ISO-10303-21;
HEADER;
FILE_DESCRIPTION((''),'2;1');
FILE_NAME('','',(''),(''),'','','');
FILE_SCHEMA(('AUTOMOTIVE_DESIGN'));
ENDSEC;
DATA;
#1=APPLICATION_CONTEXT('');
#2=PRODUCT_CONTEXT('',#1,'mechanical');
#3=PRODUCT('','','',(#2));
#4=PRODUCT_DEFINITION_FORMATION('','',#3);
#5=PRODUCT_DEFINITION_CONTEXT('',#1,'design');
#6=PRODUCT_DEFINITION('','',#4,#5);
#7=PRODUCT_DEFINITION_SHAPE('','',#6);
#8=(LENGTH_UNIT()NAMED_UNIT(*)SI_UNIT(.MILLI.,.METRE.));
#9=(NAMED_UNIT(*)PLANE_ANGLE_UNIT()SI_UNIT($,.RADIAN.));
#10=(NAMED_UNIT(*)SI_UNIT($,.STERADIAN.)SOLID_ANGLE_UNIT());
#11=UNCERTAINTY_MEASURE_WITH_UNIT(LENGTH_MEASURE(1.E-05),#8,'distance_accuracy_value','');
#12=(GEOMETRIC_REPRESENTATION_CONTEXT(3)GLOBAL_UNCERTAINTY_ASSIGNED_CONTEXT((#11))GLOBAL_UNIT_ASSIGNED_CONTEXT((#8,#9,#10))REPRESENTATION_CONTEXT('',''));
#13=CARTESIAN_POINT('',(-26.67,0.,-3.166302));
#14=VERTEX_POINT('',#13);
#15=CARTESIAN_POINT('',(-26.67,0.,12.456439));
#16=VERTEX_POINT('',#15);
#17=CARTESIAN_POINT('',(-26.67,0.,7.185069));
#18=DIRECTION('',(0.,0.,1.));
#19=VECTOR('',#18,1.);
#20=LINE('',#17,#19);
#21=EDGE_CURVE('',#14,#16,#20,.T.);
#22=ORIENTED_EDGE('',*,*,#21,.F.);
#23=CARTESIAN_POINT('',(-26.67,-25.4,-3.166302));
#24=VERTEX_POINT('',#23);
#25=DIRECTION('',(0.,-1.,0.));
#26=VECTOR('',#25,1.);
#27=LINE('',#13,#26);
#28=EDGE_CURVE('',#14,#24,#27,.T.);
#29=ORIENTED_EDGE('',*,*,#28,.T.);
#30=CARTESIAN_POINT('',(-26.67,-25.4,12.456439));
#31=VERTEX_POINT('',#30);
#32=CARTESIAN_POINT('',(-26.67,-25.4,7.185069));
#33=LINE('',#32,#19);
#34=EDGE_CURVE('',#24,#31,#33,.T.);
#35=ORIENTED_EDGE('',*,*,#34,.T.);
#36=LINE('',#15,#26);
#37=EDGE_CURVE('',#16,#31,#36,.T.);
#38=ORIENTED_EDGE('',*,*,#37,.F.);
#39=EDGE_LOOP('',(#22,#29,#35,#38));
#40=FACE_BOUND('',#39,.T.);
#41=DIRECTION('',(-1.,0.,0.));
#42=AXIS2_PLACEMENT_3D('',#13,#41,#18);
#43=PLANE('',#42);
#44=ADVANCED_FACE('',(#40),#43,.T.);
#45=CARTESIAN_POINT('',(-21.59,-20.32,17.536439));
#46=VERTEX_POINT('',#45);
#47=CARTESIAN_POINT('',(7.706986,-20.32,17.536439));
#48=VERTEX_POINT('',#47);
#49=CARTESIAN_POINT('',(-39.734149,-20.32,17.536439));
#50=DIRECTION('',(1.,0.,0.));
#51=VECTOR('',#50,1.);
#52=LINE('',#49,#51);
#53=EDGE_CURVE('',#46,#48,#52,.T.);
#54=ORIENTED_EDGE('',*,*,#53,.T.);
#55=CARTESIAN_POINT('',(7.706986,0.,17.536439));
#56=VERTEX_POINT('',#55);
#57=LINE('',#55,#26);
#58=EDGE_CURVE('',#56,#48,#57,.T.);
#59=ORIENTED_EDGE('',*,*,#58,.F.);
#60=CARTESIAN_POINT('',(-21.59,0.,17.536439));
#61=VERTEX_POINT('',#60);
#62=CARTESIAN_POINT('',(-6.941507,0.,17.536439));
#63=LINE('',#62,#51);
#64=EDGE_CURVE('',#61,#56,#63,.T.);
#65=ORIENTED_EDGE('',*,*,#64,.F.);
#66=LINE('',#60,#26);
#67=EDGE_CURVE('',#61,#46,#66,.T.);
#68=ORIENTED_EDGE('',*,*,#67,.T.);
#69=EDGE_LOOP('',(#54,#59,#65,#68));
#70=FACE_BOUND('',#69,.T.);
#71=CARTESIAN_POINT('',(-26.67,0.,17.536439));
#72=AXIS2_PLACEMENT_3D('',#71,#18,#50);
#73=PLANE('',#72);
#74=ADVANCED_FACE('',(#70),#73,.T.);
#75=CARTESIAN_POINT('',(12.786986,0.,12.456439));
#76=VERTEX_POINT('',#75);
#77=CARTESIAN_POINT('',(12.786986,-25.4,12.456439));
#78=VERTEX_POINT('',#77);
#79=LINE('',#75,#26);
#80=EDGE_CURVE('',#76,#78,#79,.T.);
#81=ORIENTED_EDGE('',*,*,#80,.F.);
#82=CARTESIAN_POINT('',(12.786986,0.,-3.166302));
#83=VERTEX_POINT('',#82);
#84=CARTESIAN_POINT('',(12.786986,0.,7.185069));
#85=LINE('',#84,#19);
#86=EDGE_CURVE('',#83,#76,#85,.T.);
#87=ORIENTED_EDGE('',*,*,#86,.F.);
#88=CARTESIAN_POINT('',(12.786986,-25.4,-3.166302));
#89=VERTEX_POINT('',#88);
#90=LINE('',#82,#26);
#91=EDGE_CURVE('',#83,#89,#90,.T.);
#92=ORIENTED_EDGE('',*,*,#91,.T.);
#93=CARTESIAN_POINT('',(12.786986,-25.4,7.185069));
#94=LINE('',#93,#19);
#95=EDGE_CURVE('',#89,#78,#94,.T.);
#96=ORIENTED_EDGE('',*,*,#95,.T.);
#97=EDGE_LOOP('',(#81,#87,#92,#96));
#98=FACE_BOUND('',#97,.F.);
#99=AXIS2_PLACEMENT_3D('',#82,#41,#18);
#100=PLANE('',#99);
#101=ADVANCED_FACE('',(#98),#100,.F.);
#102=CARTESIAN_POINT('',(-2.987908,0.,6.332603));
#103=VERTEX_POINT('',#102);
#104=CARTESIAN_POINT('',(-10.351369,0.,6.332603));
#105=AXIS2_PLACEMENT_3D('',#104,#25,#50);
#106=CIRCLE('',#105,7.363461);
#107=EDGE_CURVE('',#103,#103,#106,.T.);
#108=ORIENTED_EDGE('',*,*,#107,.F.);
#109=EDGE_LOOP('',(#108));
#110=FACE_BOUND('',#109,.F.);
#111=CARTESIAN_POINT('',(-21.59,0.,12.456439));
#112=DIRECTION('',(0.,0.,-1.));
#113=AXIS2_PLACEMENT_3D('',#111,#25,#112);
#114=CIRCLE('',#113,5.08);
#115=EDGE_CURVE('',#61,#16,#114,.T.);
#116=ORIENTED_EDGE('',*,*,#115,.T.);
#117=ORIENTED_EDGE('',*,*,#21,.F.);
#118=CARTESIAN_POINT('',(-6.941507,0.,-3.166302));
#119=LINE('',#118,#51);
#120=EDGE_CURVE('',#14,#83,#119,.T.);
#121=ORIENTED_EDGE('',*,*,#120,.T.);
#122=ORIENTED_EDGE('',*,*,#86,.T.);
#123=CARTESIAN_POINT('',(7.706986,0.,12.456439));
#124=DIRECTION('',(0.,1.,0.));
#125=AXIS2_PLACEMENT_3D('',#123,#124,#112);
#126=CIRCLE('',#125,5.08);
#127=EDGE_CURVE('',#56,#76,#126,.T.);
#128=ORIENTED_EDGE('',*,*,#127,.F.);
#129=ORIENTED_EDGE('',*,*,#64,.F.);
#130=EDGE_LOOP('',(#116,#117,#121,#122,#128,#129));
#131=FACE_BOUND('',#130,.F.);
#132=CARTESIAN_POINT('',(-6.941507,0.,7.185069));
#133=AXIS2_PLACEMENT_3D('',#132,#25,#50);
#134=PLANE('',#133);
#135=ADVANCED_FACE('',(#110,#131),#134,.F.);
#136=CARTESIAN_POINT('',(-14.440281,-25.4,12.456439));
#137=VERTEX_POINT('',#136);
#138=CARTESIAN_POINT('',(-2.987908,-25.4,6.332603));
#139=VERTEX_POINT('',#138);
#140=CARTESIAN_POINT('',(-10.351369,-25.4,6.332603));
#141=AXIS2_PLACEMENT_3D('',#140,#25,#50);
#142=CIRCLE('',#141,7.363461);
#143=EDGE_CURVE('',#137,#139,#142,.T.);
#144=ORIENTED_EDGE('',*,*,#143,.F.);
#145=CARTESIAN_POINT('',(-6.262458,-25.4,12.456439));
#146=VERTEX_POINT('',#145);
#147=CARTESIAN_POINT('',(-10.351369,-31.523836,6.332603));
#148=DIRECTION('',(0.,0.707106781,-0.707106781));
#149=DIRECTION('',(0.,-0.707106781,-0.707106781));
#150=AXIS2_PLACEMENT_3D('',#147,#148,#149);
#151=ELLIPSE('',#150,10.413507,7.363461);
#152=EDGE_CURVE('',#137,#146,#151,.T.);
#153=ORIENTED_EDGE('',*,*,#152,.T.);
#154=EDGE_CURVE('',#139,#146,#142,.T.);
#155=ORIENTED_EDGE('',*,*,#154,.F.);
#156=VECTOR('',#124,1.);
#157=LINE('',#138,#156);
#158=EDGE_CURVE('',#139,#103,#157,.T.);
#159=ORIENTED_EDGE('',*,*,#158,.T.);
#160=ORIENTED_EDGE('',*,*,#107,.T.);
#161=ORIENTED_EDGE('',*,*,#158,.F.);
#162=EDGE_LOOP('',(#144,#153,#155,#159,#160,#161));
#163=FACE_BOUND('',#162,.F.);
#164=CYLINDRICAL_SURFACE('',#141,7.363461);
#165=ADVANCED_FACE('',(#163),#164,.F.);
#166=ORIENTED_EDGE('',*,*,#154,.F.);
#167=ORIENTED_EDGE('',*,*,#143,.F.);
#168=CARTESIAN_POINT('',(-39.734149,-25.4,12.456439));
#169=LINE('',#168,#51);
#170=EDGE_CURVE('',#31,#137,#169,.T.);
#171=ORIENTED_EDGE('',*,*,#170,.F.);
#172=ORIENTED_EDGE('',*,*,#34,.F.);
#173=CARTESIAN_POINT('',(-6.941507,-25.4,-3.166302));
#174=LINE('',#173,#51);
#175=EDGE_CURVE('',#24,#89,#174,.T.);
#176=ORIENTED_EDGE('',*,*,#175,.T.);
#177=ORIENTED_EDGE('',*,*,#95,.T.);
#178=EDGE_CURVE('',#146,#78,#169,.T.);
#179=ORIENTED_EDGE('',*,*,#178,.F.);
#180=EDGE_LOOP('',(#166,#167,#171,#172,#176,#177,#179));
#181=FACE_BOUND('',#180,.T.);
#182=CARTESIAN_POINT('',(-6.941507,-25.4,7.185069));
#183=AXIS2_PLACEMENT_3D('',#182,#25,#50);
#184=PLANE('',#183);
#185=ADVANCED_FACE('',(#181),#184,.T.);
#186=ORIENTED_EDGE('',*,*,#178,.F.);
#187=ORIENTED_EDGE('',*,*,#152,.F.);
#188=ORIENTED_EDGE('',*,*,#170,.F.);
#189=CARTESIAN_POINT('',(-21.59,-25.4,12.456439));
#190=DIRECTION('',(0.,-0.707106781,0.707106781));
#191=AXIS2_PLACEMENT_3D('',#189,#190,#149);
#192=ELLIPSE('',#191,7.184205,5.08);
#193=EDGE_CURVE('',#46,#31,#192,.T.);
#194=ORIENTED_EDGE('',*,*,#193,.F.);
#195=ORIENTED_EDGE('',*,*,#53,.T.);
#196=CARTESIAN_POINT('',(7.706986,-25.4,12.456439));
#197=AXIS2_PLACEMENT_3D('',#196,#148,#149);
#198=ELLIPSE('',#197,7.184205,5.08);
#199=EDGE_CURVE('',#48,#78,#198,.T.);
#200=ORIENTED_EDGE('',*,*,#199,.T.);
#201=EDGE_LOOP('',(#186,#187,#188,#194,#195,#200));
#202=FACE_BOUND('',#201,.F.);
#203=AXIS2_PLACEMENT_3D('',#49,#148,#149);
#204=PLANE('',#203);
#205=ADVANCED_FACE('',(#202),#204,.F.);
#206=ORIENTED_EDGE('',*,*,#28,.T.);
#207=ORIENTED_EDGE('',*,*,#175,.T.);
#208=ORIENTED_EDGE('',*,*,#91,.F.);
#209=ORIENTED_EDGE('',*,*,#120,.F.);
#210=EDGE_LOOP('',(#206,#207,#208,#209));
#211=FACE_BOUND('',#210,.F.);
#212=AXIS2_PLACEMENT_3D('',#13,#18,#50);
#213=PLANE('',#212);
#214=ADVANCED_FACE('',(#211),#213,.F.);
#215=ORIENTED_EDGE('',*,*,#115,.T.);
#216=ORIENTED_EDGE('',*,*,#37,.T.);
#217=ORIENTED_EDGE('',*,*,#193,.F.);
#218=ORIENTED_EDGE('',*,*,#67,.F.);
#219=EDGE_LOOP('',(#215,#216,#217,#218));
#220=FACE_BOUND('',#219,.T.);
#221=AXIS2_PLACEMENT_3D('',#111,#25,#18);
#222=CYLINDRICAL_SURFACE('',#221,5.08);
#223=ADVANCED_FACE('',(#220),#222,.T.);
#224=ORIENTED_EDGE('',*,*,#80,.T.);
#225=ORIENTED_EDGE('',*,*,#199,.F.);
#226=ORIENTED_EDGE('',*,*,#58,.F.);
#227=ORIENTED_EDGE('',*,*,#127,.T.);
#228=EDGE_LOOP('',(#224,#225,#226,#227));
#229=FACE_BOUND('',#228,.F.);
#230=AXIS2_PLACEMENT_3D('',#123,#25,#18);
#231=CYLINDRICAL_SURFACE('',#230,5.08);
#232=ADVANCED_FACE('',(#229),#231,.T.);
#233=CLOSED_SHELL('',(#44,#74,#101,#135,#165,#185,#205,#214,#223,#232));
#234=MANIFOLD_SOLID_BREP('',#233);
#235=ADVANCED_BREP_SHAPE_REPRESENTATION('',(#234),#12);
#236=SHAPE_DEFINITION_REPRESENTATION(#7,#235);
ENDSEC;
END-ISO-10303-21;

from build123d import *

# Parameters (mm, degrees)
F0_W        = 39.4569858909
F0_H        = 20.7027406432
F1_DEPTH    = 25.4
F2_R        = 7.3634612469
F3_DEPTH    = 25.4
F4_T1_DEPTH = 65.5852850486
F5_R        = 5.08
F6_R        = 5.08


# Not quite as in the source:
# - a fillet or chamfer that OpenCascade refuses, or shapes differently, is made with other operations: its cross-section is extruded or revolved along the edge and cut away or added


with BuildPart() as f1:
    # F0 (on Front) → F1 (new body)
    with BuildSketch(Plane.XZ):
        with Locations((-6.9415066391, 7.18506868)):
            Rectangle(F0_W, F0_H)
    extrude(amount=F1_DEPTH)

    # F2 (on face) → F3 (cut)
    with BuildSketch(Plane.XZ.offset(25.4)):
        with Locations((-10.3513691574, 6.3326032832)):
            Circle(F2_R)
    extrude(amount=-F3_DEPTH, mode=Mode.SUBTRACT)

    # F4: chamfer of 5.08 on 1 edges, made by hand

    # F4_s2 → F4_t1 (cut)
    with BuildSketch(Plane.YZ.offset(-39.7341491634)):
        Polygon((-20.32, 17.5364390016), (-25.4, 12.4564390016), (-25.4, 17.5364390016), align=None)
    extrude(amount=F4_T1_DEPTH, mode=Mode.SUBTRACT)

    # F5
    f5_edges = [f1.edges().sort_by_distance(p)[0] for p in [
        (12.786986, -10.16, 17.536439),
    ]]
    fillet(f5_edges, radius=F5_R)

    # F6
    f6_edges = [f1.edges().sort_by_distance(p)[0] for p in [
        (-26.67, -10.16, 17.536439),
    ]]
    fillet(f6_edges, radius=F6_R)


solid = f1.part
